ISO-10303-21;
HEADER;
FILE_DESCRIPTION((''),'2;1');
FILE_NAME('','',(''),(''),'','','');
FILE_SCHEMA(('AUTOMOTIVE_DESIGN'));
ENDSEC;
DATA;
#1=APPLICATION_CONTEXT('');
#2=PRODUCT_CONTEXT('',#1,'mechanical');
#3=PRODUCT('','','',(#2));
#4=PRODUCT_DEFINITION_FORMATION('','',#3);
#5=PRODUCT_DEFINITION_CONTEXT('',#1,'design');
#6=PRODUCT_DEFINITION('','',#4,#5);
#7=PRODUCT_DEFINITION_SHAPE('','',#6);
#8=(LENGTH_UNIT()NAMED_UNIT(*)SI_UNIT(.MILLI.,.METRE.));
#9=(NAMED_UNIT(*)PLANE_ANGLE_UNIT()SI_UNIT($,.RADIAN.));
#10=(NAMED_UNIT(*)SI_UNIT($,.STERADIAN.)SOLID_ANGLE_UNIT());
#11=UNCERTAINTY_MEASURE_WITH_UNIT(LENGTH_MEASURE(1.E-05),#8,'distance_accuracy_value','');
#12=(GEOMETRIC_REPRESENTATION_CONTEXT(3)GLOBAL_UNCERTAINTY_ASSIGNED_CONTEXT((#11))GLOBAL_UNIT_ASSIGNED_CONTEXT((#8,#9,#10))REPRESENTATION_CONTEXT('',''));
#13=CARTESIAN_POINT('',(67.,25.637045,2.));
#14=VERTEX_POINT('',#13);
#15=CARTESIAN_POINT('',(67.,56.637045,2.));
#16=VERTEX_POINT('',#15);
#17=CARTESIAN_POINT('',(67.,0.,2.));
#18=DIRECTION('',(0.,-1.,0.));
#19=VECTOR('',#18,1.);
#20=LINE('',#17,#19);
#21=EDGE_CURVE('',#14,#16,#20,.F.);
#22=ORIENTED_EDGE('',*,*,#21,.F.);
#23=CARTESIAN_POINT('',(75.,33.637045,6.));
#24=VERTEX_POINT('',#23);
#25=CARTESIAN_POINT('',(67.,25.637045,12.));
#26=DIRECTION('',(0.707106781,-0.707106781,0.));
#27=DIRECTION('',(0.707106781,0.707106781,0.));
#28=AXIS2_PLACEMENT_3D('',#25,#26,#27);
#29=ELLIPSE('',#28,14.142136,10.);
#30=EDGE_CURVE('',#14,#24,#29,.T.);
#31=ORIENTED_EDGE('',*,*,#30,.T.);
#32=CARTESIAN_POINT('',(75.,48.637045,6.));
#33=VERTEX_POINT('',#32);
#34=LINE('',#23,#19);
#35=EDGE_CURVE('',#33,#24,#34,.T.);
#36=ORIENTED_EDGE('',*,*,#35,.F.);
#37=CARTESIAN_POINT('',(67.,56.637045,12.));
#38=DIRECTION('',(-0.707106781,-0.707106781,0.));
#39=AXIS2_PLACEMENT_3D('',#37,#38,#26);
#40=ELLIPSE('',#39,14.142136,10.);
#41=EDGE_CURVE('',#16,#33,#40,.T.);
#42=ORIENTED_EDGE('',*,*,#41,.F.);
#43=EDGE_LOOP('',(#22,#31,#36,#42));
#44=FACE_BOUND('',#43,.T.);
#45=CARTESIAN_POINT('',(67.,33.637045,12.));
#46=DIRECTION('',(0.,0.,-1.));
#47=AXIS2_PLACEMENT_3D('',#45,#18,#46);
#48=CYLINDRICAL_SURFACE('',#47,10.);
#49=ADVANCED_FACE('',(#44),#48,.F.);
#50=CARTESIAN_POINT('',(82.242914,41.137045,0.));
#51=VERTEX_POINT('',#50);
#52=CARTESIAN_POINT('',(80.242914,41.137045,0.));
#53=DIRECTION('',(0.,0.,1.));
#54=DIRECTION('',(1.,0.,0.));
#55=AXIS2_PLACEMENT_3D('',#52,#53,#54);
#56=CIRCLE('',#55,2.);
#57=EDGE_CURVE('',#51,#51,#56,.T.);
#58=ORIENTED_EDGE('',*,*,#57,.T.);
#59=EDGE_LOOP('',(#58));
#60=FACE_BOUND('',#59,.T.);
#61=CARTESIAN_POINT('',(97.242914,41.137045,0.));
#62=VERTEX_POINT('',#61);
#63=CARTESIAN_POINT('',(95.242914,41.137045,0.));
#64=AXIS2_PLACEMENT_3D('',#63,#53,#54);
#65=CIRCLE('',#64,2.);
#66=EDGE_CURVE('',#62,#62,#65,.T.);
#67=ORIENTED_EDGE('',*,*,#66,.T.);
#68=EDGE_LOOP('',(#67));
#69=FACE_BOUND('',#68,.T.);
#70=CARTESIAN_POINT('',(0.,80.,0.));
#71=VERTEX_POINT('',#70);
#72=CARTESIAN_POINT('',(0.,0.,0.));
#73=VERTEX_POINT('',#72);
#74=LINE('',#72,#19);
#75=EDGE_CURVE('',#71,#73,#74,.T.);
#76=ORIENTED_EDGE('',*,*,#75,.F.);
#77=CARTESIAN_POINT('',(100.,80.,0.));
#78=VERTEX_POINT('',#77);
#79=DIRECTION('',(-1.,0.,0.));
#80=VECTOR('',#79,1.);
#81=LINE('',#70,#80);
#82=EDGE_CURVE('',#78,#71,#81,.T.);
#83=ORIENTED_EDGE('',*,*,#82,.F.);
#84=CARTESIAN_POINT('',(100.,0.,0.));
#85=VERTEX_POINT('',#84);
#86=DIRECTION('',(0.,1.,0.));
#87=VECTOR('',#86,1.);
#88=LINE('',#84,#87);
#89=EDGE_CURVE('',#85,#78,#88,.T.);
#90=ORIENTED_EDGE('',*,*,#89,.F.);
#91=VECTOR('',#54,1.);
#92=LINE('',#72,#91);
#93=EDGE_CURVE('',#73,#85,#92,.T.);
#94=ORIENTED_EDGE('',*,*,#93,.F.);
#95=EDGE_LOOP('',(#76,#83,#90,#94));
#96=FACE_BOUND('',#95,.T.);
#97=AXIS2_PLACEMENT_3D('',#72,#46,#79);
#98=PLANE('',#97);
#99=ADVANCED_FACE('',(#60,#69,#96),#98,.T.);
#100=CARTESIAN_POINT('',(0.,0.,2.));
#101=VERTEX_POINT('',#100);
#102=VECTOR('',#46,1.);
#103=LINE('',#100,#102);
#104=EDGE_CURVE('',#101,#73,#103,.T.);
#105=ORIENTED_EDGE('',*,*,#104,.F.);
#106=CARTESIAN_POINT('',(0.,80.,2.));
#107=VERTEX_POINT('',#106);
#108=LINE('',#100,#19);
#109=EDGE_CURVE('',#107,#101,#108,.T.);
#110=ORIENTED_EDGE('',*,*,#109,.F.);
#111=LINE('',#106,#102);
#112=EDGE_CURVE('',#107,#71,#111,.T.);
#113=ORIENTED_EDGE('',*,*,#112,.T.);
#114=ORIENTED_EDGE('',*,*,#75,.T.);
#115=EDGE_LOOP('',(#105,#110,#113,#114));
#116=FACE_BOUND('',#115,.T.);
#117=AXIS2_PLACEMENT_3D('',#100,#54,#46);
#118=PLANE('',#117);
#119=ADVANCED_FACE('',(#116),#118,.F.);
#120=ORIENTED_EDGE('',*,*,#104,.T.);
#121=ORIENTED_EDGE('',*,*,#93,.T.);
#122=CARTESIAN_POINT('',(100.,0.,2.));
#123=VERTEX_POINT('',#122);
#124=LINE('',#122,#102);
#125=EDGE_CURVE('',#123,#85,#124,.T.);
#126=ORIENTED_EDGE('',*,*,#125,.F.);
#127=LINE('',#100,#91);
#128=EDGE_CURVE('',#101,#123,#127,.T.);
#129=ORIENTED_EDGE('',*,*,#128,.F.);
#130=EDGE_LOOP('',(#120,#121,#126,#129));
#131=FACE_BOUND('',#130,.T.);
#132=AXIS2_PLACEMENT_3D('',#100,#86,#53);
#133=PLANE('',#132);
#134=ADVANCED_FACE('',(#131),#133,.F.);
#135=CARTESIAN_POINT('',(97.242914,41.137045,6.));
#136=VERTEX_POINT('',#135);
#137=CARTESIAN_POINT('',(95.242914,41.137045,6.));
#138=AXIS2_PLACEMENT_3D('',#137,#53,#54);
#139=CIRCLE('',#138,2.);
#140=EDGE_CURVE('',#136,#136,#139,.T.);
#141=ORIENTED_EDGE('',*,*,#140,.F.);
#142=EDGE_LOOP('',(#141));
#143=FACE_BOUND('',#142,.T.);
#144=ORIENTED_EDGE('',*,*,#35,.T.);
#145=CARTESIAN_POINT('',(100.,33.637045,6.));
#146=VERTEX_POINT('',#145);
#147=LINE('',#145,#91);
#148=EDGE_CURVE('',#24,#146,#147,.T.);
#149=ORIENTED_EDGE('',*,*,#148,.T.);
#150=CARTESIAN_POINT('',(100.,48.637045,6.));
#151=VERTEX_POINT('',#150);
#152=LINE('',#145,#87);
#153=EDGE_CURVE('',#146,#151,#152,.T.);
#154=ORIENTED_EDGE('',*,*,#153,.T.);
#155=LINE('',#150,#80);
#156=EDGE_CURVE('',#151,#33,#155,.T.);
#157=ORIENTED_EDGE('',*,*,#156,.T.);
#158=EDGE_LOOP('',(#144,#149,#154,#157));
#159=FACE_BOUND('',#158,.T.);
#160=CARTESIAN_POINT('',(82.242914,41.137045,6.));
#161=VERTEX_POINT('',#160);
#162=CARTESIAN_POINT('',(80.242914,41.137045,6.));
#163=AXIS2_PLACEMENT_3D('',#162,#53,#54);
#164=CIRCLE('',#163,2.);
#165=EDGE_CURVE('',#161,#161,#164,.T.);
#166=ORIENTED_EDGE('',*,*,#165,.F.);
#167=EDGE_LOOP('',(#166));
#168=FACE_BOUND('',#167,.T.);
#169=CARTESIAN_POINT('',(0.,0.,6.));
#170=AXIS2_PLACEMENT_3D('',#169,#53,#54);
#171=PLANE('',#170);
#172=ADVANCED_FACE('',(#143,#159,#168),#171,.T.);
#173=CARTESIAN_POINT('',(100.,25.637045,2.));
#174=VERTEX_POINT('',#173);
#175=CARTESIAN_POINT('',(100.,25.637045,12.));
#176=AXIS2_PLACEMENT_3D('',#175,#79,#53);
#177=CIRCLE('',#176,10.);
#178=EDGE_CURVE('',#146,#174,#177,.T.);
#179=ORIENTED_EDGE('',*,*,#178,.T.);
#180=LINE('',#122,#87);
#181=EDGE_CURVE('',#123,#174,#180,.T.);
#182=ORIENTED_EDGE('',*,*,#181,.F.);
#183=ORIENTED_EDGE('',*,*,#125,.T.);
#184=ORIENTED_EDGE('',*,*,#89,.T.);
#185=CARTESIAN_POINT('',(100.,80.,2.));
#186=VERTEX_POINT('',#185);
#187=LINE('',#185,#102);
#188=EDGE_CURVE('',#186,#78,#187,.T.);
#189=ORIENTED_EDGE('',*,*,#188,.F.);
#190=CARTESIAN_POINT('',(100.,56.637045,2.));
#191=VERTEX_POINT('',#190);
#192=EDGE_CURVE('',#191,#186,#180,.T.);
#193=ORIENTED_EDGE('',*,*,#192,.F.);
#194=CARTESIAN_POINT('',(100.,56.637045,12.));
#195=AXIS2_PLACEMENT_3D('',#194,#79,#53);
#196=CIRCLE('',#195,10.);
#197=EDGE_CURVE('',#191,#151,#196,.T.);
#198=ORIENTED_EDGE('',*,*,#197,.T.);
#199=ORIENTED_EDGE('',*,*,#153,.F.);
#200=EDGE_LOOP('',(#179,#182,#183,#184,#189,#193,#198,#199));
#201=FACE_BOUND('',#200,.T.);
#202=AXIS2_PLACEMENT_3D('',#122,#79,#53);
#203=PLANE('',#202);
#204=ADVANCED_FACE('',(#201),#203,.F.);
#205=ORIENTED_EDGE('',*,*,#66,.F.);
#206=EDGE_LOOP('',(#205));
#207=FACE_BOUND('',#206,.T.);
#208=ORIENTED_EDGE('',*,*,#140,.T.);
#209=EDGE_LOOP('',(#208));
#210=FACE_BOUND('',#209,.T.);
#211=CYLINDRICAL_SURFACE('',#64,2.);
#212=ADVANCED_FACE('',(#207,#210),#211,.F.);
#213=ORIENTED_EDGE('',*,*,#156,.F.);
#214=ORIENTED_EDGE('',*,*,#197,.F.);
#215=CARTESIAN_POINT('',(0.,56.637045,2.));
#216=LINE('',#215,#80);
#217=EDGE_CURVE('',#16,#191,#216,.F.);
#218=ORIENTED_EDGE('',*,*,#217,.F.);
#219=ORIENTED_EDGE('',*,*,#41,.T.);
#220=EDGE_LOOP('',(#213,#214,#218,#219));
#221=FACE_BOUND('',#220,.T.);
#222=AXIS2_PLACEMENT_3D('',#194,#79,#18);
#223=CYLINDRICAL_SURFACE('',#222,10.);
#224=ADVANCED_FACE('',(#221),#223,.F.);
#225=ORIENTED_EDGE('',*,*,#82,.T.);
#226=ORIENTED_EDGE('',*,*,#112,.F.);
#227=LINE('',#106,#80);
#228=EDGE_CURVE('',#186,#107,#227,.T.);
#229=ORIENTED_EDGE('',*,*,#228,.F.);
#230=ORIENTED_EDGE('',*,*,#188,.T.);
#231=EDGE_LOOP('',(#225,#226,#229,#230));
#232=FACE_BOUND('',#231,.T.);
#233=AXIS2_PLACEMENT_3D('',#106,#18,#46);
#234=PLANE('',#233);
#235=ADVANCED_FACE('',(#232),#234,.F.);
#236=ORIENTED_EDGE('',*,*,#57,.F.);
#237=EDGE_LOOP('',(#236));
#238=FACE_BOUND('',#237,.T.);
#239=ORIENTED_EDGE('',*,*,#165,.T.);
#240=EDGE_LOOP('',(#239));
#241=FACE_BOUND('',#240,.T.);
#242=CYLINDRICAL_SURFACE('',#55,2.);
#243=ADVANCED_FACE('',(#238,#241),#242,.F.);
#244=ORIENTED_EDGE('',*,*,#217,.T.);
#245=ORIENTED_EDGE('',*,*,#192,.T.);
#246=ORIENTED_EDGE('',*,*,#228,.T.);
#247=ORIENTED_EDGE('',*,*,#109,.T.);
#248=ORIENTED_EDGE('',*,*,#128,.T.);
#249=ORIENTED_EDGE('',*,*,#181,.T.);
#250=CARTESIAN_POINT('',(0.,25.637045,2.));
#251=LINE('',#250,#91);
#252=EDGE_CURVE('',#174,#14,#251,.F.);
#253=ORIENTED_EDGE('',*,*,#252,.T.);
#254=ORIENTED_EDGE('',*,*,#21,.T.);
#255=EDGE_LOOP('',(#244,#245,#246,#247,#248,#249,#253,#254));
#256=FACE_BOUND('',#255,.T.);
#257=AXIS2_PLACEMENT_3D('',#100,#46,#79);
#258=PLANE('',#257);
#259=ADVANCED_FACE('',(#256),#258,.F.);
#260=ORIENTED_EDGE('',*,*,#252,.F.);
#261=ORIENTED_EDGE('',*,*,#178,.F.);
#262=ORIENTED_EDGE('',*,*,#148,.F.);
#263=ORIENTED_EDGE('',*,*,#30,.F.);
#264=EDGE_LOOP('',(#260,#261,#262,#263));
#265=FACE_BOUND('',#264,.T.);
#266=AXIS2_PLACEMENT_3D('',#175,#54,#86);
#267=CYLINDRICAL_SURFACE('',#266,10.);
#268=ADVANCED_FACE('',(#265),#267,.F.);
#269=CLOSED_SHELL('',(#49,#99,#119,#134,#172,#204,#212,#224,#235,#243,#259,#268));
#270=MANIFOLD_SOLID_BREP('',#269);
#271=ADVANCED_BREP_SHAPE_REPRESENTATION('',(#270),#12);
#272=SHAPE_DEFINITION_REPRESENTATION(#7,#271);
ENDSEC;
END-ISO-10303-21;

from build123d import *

# Parameters (mm, degrees)
SKETCH1_W           = 100
SKETCH1_H           = 80
BOSS_EXTRUDE1_DEPTH = 2
SKETCH2_W           = 25
SKETCH2_H           = 15
BOSS_EXTRUDE2_DEPTH = 4
SKETCH3_R           = 2
CUT_EXTRUDE1_DEPTH  = 129.202964084
FILLET1_R           = 10


with BuildPart() as part:
    # Sketch1 → Boss-Extrude1 (new body)
    with BuildSketch(Plane.XY):
        with Locations((50, 40)):
            Rectangle(SKETCH1_W, SKETCH1_H)
    extrude(amount=BOSS_EXTRUDE1_DEPTH)

    # Sketch2 → Boss-Extrude2 (add)
    with BuildSketch(Plane.XY.offset(2)):
        with Locations((87.5, 41.137045181)):
            Rectangle(SKETCH2_W, SKETCH2_H)
    extrude(amount=BOSS_EXTRUDE2_DEPTH)

    # Sketch3 → Cut-Extrude1 (cut, through all)
    with BuildSketch(Plane.XY.offset(6)):
        with Locations((80.242914422, 41.137045181)):
            Circle(SKETCH3_R)
        with Locations((95.242914422, 41.137045181)):
            Circle(SKETCH3_R)
    extrude(amount=-CUT_EXTRUDE1_DEPTH, mode=Mode.SUBTRACT)

    # Fillet1
    # the kernel refuses this fillet: 10 mm, written as the material it adds along each edge
    with BuildSketch(Plane(origin=(75, 48.637045181, 2), x_dir=(0, 1, 0), z_dir=(1, 0, 0)), Plane(origin=(100, 33.637045181, 2), x_dir=(0, -1, 0), z_dir=(-1, 0, 0))) as fillet1_piece_1:
        with BuildLine():
            CenterArc((8, 10), FILLET1_R, 216.869897646, 53.130102354)
            Line((0, 4), (-0.16, 3.88))
            ThreePointArc((-0.16, 3.88), (-0.2, 2), (-0.2, 0))
            Line((-0.2, 0), (0, -0.2))
            Line((0, -0.2), (8, -0.2))
            Line((8, -0.2), (8, 0))
        make_face()
    extrude(amount=25)
    with BuildSketch(Plane(origin=(75, 33.637045181, 2), x_dir=(-1, 0, 0), z_dir=(0, 1, 0))) as fillet1_piece_2:
        with BuildLine():
            CenterArc((8, 10), FILLET1_R, 216.869897646, 53.130102354)
            Line((0, 4), (-0.16, 3.88))
            ThreePointArc((-0.16, 3.88), (-0.2, 2), (-0.2, 0))
            Line((-0.2, 0), (0, -0.2))
            Line((0, -0.2), (8, -0.2))
            Line((8, -0.2), (8, 0))
        make_face()
    extrude(amount=15)
    with BuildSketch(Plane(origin=(55, 48.637045181, 2), x_dir=(0, 1, 0), z_dir=(1, 0, 0))) as fillet1_piece_3a_section:
        with BuildLine():
            CenterArc((8, 10), FILLET1_R, 216.869897646, 53.130102354)
            Line((0, 4), (-0.16, 3.88))
            ThreePointArc((-0.16, 3.88), (-0.2, 2), (-0.2, 0))
            Line((-0.2, 0), (0, -0.2))
            Line((0, -0.2), (8, -0.2))
            Line((8, -0.2), (8, 0))
        make_face()
    fillet1_piece_3a = extrude(amount=45, mode=Mode.PRIVATE)
    fillet1_piece_3a = split(fillet1_piece_3a, bisect_by=Plane(origin=(75, 50.695879295, 3.023885124), z_dir=(-1, 0, 0)), keep=Keep.TOP, mode=Mode.PRIVATE)
    with BuildSketch(Plane(origin=(75, 33.637045181, 2), x_dir=(-1, 0, 0), z_dir=(0, 1, 0))) as fillet1_piece_3b_section:
        with BuildLine():
            CenterArc((8, 10), FILLET1_R, 216.869897646, 53.130102354)
            Line((0, 4), (-0.16, 3.88))
            ThreePointArc((-0.16, 3.88), (-0.2, 2), (-0.2, 0))
            Line((-0.2, 0), (0, -0.2))
            Line((0, -0.2), (8, -0.2))
            Line((8, -0.2), (8, 0))
        make_face()
    fillet1_piece_3b = extrude(amount=35, mode=Mode.PRIVATE)
    fillet1_piece_3b = split(fillet1_piece_3b, bisect_by=Plane(origin=(72.941165886, 48.637045181, 3.023885124), z_dir=(0, 1, 0)), keep=Keep.TOP, mode=Mode.PRIVATE)
    fillet1_piece_3 = fillet1_piece_3a & fillet1_piece_3b
    add(fillet1_piece_3)
    with BuildSketch(Plane(origin=(75, 13.637045181, 2), x_dir=(-1, 0, 0), z_dir=(0, 1, 0))) as fillet1_piece_4a_section:
        with BuildLine():
            CenterArc((8, 10), FILLET1_R, 216.869897646, 53.130102354)
            Line((0, 4), (-0.16, 3.88))
            ThreePointArc((-0.16, 3.88), (-0.2, 2), (-0.2, 0))
            Line((-0.2, 0), (0, -0.2))
            Line((0, -0.2), (8, -0.2))
            Line((8, -0.2), (8, 0))
        make_face()
    fillet1_piece_4a = extrude(amount=35, mode=Mode.PRIVATE)
    fillet1_piece_4a = split(fillet1_piece_4a, bisect_by=Plane(origin=(72.941165886, 33.637045181, 3.023885124), z_dir=(0, -1, 0)), keep=Keep.TOP, mode=Mode.PRIVATE)
    with BuildSketch(Plane(origin=(100, 33.637045181, 2), x_dir=(0, -1, 0), z_dir=(-1, 0, 0))) as fillet1_piece_4b_section:
        with BuildLine():
            CenterArc((8, 10), FILLET1_R, 216.869897646, 53.130102354)
            Line((0, 4), (-0.16, 3.88))
            ThreePointArc((-0.16, 3.88), (-0.2, 2), (-0.2, 0))
            Line((-0.2, 0), (0, -0.2))
            Line((0, -0.2), (8, -0.2))
            Line((8, -0.2), (8, 0))
        make_face()
    fillet1_piece_4b = extrude(amount=45, mode=Mode.PRIVATE)
    fillet1_piece_4b = split(fillet1_piece_4b, bisect_by=Plane(origin=(75, 31.578211067, 3.023885124), z_dir=(-1, 0, 0)), keep=Keep.TOP, mode=Mode.PRIVATE)
    fillet1_piece_4 = fillet1_piece_4a & fillet1_piece_4b
    add(fillet1_piece_4)


solid = part.part
